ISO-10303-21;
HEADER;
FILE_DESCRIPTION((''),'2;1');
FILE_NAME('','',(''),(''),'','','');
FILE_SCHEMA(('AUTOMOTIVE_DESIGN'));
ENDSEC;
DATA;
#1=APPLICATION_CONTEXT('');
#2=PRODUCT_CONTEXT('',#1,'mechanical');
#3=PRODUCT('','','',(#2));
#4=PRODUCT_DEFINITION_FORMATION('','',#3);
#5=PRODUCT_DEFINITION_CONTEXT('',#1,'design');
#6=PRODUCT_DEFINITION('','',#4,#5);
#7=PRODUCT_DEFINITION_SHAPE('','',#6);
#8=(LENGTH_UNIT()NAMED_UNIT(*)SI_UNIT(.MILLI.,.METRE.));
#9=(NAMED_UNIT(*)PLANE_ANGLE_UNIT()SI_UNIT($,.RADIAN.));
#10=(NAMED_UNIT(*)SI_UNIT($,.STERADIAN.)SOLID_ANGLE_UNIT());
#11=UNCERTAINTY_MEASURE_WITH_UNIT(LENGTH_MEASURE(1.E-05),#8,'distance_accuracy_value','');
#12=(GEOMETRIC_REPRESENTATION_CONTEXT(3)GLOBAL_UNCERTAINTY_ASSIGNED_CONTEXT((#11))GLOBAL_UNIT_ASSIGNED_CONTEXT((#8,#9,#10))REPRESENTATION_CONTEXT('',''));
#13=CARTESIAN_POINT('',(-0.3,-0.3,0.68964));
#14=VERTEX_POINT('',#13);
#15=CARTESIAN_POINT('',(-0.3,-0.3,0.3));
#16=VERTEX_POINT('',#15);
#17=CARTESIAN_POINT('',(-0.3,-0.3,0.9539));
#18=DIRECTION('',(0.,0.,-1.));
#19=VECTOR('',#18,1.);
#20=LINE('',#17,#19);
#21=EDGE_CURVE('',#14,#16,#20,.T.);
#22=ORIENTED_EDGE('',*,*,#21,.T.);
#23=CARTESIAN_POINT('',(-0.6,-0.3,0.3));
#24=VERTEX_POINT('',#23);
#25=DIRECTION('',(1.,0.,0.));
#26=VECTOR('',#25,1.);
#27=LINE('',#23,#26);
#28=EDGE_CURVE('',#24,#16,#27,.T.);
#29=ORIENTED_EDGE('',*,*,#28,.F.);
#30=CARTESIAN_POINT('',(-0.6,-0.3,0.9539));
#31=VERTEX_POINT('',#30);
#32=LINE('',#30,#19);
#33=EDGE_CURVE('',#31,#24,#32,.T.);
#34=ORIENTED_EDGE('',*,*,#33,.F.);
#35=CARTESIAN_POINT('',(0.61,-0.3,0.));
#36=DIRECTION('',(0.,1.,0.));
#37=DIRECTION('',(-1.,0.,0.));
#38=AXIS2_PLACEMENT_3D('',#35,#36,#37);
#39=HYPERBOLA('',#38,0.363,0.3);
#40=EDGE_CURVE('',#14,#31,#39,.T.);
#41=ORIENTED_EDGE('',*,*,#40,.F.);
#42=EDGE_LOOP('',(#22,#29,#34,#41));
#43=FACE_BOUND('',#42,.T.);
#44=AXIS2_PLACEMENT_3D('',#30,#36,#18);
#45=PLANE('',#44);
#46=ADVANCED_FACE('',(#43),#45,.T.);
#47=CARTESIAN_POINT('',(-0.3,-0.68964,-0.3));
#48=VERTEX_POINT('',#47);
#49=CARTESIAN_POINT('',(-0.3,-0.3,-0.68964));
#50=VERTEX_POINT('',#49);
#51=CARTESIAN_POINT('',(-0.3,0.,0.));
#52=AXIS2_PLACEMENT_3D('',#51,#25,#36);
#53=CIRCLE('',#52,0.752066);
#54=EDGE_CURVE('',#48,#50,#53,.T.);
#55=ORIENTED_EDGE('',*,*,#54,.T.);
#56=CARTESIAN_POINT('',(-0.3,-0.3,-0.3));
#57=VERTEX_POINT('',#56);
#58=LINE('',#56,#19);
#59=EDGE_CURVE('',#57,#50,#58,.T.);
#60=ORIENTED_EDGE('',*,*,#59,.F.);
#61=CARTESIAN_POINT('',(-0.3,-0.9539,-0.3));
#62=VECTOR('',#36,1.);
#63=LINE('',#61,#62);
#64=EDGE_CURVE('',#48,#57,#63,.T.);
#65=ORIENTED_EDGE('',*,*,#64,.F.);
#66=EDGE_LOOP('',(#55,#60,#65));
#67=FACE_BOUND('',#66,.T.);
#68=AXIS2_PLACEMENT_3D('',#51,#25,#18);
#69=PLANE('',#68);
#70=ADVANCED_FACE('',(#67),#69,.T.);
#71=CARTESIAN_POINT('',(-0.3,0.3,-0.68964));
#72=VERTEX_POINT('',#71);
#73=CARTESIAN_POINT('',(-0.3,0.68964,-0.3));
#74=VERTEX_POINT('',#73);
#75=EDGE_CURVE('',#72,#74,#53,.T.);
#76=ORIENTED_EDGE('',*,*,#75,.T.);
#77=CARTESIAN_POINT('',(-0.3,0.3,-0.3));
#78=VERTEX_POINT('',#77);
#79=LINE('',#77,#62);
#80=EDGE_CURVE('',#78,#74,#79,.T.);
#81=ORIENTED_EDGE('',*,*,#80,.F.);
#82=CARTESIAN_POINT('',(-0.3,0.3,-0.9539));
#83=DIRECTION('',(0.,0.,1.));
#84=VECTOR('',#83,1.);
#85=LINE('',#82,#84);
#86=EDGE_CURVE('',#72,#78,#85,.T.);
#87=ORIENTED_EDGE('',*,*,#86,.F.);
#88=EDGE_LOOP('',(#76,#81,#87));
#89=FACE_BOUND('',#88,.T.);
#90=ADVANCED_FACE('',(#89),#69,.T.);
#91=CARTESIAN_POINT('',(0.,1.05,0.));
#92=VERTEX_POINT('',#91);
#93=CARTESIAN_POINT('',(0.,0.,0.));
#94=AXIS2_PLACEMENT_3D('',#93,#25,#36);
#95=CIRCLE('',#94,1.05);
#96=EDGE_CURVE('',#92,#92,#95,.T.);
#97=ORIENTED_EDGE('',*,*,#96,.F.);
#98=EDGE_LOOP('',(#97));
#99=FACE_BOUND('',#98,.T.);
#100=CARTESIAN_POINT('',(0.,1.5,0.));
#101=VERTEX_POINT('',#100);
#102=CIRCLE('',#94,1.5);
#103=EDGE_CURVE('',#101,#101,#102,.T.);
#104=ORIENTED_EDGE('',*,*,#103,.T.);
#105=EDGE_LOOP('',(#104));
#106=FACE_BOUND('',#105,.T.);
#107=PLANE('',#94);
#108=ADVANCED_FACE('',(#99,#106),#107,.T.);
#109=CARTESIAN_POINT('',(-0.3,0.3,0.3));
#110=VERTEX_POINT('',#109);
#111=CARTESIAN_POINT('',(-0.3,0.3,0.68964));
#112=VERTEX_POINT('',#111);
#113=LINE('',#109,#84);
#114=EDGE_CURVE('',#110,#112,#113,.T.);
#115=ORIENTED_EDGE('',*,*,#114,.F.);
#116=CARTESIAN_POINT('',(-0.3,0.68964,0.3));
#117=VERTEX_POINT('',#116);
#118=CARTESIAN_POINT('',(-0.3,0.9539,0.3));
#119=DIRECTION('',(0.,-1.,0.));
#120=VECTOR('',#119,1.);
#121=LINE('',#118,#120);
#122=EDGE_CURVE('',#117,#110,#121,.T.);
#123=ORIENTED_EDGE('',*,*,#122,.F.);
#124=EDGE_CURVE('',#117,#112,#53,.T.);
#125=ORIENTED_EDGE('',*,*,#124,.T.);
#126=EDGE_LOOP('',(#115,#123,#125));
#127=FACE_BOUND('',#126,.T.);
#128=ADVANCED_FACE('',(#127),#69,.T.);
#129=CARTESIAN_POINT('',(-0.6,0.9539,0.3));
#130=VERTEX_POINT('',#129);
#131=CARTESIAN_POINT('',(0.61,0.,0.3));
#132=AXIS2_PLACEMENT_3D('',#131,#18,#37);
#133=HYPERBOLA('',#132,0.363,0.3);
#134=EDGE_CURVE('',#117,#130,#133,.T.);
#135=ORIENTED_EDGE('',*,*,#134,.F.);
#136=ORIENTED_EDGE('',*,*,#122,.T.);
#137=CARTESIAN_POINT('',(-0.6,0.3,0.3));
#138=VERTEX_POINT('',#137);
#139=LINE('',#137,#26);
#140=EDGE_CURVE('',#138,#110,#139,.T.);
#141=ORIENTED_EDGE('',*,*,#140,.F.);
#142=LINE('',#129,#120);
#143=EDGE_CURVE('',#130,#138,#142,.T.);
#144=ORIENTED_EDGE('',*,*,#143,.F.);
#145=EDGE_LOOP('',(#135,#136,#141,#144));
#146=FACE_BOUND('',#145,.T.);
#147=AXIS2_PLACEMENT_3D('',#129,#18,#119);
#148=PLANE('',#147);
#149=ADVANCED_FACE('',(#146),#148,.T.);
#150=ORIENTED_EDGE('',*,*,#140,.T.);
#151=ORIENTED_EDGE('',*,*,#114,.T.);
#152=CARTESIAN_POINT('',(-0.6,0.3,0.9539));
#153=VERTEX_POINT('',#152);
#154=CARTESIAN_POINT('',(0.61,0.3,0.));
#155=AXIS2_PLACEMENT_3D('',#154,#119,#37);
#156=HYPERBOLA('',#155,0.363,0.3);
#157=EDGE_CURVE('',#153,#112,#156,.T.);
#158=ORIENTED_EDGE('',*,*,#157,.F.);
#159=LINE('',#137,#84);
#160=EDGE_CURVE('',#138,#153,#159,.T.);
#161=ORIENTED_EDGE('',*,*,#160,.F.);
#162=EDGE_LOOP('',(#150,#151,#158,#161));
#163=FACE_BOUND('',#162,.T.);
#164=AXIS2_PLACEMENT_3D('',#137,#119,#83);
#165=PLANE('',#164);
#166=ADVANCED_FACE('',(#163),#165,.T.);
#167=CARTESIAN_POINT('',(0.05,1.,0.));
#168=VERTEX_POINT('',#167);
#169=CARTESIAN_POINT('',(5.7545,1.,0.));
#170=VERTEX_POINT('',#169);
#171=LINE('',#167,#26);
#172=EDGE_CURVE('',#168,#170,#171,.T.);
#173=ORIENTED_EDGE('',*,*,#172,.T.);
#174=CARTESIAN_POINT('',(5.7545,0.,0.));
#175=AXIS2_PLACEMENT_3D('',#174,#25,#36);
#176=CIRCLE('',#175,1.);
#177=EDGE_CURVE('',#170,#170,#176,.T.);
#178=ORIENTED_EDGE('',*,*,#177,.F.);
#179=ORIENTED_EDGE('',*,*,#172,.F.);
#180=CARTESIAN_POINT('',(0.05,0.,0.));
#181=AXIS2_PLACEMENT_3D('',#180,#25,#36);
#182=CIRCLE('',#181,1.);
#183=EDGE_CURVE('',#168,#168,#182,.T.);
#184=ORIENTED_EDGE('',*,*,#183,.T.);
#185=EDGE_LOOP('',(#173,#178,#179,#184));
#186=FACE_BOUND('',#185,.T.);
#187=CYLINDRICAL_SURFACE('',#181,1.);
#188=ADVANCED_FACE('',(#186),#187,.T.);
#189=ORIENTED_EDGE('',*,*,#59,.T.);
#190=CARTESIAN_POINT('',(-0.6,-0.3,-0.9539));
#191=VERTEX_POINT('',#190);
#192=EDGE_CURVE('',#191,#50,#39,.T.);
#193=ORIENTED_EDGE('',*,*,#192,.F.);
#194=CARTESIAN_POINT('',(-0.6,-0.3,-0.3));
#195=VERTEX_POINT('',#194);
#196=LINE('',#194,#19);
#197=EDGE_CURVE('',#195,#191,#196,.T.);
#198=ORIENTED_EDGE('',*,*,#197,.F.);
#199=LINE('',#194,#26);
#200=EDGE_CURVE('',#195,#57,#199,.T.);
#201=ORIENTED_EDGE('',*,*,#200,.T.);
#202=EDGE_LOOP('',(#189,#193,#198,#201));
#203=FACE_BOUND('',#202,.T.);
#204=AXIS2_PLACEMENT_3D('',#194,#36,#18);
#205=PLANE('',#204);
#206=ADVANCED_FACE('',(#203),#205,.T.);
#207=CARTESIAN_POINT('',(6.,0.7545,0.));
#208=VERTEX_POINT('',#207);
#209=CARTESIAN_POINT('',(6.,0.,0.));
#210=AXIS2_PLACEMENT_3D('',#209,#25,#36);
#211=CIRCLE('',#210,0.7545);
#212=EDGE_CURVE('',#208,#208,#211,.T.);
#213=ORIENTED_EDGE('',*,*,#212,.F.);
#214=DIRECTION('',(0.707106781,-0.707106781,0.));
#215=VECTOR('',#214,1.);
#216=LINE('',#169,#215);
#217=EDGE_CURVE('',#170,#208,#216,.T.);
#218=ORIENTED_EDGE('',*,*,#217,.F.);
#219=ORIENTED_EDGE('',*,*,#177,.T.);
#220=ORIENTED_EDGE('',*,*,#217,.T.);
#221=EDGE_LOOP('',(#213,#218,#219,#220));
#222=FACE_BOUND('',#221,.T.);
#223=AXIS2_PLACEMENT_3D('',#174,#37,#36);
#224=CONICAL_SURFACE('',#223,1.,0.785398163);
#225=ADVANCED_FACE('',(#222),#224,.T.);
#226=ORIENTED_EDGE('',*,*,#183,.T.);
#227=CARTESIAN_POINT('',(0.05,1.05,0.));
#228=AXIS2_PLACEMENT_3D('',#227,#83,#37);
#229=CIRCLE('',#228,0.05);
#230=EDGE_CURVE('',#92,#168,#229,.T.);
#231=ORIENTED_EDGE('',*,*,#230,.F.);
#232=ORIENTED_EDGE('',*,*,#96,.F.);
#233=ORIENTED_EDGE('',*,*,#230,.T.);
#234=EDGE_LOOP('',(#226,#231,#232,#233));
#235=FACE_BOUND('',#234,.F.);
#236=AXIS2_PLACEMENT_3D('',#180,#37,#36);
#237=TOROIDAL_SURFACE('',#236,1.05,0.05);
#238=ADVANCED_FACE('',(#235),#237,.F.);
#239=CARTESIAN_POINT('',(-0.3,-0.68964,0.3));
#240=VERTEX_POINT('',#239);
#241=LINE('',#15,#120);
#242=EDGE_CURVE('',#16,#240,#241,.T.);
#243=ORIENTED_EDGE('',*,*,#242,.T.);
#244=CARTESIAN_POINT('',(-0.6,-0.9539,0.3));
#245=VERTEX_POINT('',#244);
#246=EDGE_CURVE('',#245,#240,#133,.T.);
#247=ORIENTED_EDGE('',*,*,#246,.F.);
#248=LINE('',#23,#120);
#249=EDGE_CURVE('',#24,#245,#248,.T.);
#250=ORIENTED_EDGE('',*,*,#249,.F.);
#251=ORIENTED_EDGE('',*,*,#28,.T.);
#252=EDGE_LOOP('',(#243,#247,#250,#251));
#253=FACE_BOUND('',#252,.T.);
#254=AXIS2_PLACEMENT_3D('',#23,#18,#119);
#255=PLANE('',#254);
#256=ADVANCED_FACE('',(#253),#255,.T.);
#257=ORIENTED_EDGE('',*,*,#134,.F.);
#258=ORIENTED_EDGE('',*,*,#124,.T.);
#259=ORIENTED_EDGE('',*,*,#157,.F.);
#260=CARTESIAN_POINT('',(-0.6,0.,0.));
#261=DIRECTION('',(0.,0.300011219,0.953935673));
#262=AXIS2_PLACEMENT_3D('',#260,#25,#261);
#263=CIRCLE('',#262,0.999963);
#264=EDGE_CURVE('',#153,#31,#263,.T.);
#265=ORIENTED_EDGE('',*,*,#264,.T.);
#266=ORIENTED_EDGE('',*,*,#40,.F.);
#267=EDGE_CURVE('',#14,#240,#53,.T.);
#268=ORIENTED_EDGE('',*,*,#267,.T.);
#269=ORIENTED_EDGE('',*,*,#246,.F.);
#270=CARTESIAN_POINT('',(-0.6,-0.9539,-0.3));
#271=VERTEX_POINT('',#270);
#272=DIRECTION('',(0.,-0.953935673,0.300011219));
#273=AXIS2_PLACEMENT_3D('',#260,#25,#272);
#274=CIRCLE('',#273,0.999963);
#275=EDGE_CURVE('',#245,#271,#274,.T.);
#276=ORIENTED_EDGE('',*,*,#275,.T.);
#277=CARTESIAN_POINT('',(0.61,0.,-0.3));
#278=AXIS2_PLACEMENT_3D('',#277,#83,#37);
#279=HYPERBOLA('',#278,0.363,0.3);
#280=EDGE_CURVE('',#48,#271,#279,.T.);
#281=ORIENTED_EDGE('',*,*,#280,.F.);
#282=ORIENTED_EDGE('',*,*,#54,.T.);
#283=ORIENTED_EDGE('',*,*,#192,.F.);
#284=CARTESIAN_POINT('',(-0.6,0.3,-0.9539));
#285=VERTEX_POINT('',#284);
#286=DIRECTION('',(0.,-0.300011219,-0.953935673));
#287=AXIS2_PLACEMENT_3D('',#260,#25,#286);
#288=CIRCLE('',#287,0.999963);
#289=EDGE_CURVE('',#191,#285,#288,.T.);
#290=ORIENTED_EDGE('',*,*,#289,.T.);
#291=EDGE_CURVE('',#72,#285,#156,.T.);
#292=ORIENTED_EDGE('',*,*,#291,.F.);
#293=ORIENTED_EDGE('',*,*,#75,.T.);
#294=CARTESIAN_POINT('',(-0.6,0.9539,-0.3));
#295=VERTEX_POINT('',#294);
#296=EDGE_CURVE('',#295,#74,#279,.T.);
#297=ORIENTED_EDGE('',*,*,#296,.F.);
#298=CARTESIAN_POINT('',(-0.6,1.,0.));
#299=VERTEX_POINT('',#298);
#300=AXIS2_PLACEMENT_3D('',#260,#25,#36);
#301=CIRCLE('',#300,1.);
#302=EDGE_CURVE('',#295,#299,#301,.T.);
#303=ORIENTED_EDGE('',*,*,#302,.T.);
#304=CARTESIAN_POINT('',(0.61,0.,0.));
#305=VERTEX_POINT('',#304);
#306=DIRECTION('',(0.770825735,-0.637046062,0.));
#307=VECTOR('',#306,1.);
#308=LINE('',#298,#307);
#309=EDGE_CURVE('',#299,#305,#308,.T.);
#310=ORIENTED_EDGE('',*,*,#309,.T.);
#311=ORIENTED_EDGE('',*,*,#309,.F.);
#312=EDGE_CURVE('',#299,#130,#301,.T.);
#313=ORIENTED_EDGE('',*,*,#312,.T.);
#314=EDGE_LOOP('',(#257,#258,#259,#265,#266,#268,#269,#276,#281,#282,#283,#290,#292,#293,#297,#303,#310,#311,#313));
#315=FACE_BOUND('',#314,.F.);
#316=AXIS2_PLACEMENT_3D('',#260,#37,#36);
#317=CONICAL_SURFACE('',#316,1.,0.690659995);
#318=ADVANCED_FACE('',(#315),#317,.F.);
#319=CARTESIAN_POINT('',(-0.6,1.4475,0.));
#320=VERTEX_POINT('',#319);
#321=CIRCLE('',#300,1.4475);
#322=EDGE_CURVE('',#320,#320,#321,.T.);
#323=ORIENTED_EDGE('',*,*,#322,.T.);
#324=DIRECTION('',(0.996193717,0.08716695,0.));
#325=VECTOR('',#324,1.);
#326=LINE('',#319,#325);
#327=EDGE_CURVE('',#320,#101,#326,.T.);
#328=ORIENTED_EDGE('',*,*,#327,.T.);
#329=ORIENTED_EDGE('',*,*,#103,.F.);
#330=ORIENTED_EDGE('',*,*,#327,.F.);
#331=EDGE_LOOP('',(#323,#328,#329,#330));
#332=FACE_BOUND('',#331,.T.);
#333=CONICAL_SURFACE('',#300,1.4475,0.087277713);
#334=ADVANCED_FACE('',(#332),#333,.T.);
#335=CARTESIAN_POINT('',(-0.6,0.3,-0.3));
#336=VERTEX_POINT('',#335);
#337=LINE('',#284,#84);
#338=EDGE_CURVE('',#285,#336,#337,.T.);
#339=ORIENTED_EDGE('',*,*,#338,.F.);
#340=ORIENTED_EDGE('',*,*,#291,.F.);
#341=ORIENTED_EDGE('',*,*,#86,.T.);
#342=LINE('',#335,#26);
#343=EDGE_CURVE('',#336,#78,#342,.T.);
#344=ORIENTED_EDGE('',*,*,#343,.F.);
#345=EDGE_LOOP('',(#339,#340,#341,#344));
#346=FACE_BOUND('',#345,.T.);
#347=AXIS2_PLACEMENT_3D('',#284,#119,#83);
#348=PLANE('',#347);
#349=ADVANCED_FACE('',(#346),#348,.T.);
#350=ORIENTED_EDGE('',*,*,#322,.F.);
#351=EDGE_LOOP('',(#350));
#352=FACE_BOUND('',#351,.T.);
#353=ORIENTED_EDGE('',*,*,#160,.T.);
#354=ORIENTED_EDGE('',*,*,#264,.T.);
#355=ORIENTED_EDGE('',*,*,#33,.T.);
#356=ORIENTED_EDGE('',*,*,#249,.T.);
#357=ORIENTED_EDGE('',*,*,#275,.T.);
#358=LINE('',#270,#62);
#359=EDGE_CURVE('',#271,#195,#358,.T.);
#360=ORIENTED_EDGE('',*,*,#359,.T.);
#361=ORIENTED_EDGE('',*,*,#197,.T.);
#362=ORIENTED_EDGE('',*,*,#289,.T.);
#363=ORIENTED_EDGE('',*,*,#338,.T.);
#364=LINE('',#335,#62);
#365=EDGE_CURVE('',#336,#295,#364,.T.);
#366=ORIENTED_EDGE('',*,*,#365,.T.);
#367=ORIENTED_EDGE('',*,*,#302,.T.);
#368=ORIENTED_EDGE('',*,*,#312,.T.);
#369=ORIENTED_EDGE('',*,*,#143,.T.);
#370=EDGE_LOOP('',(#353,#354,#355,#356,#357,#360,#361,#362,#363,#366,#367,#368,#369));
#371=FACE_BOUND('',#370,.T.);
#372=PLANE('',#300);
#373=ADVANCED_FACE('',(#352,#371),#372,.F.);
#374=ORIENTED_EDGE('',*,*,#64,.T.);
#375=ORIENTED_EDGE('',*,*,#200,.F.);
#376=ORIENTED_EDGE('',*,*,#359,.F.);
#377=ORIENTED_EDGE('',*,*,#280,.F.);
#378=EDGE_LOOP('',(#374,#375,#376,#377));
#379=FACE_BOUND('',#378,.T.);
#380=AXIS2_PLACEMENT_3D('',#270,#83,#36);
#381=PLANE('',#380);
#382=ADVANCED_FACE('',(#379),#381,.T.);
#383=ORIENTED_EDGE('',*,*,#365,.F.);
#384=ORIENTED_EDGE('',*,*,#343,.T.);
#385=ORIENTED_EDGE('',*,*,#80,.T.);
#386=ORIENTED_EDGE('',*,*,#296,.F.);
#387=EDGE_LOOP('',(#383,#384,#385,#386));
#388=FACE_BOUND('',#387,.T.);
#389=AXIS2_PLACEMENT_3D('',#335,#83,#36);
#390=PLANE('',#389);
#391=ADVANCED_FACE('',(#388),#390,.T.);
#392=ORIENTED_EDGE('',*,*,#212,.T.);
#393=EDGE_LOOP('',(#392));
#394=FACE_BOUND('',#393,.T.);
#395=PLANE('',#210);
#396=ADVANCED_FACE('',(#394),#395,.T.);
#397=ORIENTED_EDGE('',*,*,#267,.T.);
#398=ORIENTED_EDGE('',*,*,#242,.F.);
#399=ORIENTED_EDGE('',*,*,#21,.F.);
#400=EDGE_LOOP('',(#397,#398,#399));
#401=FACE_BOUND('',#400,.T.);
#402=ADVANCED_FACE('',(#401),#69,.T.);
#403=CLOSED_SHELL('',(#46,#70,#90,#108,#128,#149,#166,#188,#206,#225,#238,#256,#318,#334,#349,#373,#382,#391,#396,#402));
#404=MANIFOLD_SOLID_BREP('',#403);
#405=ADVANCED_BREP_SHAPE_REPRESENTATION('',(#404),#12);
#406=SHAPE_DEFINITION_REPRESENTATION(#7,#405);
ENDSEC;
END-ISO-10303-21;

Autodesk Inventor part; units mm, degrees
sketch "Sketch_1" plane through (0, 0, 0) normal (0, 0, 1) x (1, 0, 0)
  line L0 (6, 0) -> (-0.6, 0)
  line L1 (-0.6, 0) -> (-0.6, 1.5)
  line L2 (-0.6, 1.5) -> (0, 1.5)
  line L3 (0, 1.5) -> (0, 1.05)
  arc A0 (0, 1.05) -> (0.05, 1) centre (0.05, 1.05) ccw
  line L4 (0.05, 1) -> (5.7545, 1)
  line L5 (5.7545, 1) -> (6, 0.7545)
  line L6 (6, 0.7545) -> (6, 0)
  line L7 (6, 0) -> (-0.6, 0)
revolve "Revolution1" add sketch "Sketch_1" angle 360 about axis through (6, 0, 0) along (1, 0, 0)
thread "Thread1" size "M2x0.4" class "6g" standard "ISO Metric profile" length 5.3545
sketch "Sketch_3" plane through (0, 0, 0) normal (0, 0, 1) x (1, 0, 0)
  line L0 (0.61, 0) -> (-0.6, 0)
  line L1 (-0.6, 0) -> (-0.6, 1)
  line L2 (-0.6, 1) -> (0.61, 0)
  line L3 (0.61, 0) -> (-0.6, 0)
revolve "Revolution2" cut sketch "Sketch_3" angle 360 about axis through (0.61, 0, 0) along (1, 0, 0)
sketch "Sketch_5" plane through (-0.6, 0, 0) normal (1, 0, 0) x (0, 0, -1)
  circle A0 centre (0, 0) radius 1.1
  arc A1 (-0.9539, 0.3) -> (-0.9539, -0.3) centre (0, 0) ccw
  line L0 (-0.9539, -0.3) -> (-0.3, -0.3)
  line L1 (-0.3, -0.3) -> (-0.3, -0.9539)
  arc A2 (-0.3, -0.9539) -> (0.3, -0.9539) centre (0, 0) ccw
  line L2 (0.3, -0.9539) -> (0.3, -0.3)
  line L3 (0.3, -0.3) -> (0.9539, -0.3)
  arc A3 (0.9539, -0.3) -> (0.9539, 0.3) centre (0, 0) ccw
  line L4 (0.9539, 0.3) -> (0.3, 0.3)
  line L5 (0.3, 0.3) -> (0.3, 0.9539)
  arc A4 (0.3, 0.9539) -> (-0.3, 0.9539) centre (0, 0) ccw
  line L6 (-0.3, 0.9539) -> (-0.3, 0.3)
  line L7 (-0.3, 0.3) -> (-0.9539, 0.3)
extrude "Extrusion1" add sketch "Sketch_5" along normal blind 0.3
sketch "Sketch_6" plane through (0, 0, 0) normal (0, 0, 1) x (1, 0, 0)
  line L0 (50, 0) -> (-50, 0)
  line L1 (-0.6, 1.5) -> (-0.6, 1.4475)
  line L2 (-0.6, 1.4475) -> (0, 1.5)
  line L3 (0, 1.5) -> (-0.6, 1.5)
revolve "Revolution3" cut sketch "Sketch_6" angle 360 about axis through (50, 0, 0) along (1, 0, 0)
ref_plane "screw_to_rail_XY" through (0, 0, 0) normal (-1, 0, 0) x (0, 0, -1)
ref_plane "screw_to_rail_YZ" through (0, 0, 0) normal (0, 0, -1) x (0, -1, 0)
ref_plane "screw_to_rail_ZX" through (0, 0, 0) normal (0, -1, 0) x (-1, 0, 0)
properties part number "M2x6_b" material "ステンレス鋼"
